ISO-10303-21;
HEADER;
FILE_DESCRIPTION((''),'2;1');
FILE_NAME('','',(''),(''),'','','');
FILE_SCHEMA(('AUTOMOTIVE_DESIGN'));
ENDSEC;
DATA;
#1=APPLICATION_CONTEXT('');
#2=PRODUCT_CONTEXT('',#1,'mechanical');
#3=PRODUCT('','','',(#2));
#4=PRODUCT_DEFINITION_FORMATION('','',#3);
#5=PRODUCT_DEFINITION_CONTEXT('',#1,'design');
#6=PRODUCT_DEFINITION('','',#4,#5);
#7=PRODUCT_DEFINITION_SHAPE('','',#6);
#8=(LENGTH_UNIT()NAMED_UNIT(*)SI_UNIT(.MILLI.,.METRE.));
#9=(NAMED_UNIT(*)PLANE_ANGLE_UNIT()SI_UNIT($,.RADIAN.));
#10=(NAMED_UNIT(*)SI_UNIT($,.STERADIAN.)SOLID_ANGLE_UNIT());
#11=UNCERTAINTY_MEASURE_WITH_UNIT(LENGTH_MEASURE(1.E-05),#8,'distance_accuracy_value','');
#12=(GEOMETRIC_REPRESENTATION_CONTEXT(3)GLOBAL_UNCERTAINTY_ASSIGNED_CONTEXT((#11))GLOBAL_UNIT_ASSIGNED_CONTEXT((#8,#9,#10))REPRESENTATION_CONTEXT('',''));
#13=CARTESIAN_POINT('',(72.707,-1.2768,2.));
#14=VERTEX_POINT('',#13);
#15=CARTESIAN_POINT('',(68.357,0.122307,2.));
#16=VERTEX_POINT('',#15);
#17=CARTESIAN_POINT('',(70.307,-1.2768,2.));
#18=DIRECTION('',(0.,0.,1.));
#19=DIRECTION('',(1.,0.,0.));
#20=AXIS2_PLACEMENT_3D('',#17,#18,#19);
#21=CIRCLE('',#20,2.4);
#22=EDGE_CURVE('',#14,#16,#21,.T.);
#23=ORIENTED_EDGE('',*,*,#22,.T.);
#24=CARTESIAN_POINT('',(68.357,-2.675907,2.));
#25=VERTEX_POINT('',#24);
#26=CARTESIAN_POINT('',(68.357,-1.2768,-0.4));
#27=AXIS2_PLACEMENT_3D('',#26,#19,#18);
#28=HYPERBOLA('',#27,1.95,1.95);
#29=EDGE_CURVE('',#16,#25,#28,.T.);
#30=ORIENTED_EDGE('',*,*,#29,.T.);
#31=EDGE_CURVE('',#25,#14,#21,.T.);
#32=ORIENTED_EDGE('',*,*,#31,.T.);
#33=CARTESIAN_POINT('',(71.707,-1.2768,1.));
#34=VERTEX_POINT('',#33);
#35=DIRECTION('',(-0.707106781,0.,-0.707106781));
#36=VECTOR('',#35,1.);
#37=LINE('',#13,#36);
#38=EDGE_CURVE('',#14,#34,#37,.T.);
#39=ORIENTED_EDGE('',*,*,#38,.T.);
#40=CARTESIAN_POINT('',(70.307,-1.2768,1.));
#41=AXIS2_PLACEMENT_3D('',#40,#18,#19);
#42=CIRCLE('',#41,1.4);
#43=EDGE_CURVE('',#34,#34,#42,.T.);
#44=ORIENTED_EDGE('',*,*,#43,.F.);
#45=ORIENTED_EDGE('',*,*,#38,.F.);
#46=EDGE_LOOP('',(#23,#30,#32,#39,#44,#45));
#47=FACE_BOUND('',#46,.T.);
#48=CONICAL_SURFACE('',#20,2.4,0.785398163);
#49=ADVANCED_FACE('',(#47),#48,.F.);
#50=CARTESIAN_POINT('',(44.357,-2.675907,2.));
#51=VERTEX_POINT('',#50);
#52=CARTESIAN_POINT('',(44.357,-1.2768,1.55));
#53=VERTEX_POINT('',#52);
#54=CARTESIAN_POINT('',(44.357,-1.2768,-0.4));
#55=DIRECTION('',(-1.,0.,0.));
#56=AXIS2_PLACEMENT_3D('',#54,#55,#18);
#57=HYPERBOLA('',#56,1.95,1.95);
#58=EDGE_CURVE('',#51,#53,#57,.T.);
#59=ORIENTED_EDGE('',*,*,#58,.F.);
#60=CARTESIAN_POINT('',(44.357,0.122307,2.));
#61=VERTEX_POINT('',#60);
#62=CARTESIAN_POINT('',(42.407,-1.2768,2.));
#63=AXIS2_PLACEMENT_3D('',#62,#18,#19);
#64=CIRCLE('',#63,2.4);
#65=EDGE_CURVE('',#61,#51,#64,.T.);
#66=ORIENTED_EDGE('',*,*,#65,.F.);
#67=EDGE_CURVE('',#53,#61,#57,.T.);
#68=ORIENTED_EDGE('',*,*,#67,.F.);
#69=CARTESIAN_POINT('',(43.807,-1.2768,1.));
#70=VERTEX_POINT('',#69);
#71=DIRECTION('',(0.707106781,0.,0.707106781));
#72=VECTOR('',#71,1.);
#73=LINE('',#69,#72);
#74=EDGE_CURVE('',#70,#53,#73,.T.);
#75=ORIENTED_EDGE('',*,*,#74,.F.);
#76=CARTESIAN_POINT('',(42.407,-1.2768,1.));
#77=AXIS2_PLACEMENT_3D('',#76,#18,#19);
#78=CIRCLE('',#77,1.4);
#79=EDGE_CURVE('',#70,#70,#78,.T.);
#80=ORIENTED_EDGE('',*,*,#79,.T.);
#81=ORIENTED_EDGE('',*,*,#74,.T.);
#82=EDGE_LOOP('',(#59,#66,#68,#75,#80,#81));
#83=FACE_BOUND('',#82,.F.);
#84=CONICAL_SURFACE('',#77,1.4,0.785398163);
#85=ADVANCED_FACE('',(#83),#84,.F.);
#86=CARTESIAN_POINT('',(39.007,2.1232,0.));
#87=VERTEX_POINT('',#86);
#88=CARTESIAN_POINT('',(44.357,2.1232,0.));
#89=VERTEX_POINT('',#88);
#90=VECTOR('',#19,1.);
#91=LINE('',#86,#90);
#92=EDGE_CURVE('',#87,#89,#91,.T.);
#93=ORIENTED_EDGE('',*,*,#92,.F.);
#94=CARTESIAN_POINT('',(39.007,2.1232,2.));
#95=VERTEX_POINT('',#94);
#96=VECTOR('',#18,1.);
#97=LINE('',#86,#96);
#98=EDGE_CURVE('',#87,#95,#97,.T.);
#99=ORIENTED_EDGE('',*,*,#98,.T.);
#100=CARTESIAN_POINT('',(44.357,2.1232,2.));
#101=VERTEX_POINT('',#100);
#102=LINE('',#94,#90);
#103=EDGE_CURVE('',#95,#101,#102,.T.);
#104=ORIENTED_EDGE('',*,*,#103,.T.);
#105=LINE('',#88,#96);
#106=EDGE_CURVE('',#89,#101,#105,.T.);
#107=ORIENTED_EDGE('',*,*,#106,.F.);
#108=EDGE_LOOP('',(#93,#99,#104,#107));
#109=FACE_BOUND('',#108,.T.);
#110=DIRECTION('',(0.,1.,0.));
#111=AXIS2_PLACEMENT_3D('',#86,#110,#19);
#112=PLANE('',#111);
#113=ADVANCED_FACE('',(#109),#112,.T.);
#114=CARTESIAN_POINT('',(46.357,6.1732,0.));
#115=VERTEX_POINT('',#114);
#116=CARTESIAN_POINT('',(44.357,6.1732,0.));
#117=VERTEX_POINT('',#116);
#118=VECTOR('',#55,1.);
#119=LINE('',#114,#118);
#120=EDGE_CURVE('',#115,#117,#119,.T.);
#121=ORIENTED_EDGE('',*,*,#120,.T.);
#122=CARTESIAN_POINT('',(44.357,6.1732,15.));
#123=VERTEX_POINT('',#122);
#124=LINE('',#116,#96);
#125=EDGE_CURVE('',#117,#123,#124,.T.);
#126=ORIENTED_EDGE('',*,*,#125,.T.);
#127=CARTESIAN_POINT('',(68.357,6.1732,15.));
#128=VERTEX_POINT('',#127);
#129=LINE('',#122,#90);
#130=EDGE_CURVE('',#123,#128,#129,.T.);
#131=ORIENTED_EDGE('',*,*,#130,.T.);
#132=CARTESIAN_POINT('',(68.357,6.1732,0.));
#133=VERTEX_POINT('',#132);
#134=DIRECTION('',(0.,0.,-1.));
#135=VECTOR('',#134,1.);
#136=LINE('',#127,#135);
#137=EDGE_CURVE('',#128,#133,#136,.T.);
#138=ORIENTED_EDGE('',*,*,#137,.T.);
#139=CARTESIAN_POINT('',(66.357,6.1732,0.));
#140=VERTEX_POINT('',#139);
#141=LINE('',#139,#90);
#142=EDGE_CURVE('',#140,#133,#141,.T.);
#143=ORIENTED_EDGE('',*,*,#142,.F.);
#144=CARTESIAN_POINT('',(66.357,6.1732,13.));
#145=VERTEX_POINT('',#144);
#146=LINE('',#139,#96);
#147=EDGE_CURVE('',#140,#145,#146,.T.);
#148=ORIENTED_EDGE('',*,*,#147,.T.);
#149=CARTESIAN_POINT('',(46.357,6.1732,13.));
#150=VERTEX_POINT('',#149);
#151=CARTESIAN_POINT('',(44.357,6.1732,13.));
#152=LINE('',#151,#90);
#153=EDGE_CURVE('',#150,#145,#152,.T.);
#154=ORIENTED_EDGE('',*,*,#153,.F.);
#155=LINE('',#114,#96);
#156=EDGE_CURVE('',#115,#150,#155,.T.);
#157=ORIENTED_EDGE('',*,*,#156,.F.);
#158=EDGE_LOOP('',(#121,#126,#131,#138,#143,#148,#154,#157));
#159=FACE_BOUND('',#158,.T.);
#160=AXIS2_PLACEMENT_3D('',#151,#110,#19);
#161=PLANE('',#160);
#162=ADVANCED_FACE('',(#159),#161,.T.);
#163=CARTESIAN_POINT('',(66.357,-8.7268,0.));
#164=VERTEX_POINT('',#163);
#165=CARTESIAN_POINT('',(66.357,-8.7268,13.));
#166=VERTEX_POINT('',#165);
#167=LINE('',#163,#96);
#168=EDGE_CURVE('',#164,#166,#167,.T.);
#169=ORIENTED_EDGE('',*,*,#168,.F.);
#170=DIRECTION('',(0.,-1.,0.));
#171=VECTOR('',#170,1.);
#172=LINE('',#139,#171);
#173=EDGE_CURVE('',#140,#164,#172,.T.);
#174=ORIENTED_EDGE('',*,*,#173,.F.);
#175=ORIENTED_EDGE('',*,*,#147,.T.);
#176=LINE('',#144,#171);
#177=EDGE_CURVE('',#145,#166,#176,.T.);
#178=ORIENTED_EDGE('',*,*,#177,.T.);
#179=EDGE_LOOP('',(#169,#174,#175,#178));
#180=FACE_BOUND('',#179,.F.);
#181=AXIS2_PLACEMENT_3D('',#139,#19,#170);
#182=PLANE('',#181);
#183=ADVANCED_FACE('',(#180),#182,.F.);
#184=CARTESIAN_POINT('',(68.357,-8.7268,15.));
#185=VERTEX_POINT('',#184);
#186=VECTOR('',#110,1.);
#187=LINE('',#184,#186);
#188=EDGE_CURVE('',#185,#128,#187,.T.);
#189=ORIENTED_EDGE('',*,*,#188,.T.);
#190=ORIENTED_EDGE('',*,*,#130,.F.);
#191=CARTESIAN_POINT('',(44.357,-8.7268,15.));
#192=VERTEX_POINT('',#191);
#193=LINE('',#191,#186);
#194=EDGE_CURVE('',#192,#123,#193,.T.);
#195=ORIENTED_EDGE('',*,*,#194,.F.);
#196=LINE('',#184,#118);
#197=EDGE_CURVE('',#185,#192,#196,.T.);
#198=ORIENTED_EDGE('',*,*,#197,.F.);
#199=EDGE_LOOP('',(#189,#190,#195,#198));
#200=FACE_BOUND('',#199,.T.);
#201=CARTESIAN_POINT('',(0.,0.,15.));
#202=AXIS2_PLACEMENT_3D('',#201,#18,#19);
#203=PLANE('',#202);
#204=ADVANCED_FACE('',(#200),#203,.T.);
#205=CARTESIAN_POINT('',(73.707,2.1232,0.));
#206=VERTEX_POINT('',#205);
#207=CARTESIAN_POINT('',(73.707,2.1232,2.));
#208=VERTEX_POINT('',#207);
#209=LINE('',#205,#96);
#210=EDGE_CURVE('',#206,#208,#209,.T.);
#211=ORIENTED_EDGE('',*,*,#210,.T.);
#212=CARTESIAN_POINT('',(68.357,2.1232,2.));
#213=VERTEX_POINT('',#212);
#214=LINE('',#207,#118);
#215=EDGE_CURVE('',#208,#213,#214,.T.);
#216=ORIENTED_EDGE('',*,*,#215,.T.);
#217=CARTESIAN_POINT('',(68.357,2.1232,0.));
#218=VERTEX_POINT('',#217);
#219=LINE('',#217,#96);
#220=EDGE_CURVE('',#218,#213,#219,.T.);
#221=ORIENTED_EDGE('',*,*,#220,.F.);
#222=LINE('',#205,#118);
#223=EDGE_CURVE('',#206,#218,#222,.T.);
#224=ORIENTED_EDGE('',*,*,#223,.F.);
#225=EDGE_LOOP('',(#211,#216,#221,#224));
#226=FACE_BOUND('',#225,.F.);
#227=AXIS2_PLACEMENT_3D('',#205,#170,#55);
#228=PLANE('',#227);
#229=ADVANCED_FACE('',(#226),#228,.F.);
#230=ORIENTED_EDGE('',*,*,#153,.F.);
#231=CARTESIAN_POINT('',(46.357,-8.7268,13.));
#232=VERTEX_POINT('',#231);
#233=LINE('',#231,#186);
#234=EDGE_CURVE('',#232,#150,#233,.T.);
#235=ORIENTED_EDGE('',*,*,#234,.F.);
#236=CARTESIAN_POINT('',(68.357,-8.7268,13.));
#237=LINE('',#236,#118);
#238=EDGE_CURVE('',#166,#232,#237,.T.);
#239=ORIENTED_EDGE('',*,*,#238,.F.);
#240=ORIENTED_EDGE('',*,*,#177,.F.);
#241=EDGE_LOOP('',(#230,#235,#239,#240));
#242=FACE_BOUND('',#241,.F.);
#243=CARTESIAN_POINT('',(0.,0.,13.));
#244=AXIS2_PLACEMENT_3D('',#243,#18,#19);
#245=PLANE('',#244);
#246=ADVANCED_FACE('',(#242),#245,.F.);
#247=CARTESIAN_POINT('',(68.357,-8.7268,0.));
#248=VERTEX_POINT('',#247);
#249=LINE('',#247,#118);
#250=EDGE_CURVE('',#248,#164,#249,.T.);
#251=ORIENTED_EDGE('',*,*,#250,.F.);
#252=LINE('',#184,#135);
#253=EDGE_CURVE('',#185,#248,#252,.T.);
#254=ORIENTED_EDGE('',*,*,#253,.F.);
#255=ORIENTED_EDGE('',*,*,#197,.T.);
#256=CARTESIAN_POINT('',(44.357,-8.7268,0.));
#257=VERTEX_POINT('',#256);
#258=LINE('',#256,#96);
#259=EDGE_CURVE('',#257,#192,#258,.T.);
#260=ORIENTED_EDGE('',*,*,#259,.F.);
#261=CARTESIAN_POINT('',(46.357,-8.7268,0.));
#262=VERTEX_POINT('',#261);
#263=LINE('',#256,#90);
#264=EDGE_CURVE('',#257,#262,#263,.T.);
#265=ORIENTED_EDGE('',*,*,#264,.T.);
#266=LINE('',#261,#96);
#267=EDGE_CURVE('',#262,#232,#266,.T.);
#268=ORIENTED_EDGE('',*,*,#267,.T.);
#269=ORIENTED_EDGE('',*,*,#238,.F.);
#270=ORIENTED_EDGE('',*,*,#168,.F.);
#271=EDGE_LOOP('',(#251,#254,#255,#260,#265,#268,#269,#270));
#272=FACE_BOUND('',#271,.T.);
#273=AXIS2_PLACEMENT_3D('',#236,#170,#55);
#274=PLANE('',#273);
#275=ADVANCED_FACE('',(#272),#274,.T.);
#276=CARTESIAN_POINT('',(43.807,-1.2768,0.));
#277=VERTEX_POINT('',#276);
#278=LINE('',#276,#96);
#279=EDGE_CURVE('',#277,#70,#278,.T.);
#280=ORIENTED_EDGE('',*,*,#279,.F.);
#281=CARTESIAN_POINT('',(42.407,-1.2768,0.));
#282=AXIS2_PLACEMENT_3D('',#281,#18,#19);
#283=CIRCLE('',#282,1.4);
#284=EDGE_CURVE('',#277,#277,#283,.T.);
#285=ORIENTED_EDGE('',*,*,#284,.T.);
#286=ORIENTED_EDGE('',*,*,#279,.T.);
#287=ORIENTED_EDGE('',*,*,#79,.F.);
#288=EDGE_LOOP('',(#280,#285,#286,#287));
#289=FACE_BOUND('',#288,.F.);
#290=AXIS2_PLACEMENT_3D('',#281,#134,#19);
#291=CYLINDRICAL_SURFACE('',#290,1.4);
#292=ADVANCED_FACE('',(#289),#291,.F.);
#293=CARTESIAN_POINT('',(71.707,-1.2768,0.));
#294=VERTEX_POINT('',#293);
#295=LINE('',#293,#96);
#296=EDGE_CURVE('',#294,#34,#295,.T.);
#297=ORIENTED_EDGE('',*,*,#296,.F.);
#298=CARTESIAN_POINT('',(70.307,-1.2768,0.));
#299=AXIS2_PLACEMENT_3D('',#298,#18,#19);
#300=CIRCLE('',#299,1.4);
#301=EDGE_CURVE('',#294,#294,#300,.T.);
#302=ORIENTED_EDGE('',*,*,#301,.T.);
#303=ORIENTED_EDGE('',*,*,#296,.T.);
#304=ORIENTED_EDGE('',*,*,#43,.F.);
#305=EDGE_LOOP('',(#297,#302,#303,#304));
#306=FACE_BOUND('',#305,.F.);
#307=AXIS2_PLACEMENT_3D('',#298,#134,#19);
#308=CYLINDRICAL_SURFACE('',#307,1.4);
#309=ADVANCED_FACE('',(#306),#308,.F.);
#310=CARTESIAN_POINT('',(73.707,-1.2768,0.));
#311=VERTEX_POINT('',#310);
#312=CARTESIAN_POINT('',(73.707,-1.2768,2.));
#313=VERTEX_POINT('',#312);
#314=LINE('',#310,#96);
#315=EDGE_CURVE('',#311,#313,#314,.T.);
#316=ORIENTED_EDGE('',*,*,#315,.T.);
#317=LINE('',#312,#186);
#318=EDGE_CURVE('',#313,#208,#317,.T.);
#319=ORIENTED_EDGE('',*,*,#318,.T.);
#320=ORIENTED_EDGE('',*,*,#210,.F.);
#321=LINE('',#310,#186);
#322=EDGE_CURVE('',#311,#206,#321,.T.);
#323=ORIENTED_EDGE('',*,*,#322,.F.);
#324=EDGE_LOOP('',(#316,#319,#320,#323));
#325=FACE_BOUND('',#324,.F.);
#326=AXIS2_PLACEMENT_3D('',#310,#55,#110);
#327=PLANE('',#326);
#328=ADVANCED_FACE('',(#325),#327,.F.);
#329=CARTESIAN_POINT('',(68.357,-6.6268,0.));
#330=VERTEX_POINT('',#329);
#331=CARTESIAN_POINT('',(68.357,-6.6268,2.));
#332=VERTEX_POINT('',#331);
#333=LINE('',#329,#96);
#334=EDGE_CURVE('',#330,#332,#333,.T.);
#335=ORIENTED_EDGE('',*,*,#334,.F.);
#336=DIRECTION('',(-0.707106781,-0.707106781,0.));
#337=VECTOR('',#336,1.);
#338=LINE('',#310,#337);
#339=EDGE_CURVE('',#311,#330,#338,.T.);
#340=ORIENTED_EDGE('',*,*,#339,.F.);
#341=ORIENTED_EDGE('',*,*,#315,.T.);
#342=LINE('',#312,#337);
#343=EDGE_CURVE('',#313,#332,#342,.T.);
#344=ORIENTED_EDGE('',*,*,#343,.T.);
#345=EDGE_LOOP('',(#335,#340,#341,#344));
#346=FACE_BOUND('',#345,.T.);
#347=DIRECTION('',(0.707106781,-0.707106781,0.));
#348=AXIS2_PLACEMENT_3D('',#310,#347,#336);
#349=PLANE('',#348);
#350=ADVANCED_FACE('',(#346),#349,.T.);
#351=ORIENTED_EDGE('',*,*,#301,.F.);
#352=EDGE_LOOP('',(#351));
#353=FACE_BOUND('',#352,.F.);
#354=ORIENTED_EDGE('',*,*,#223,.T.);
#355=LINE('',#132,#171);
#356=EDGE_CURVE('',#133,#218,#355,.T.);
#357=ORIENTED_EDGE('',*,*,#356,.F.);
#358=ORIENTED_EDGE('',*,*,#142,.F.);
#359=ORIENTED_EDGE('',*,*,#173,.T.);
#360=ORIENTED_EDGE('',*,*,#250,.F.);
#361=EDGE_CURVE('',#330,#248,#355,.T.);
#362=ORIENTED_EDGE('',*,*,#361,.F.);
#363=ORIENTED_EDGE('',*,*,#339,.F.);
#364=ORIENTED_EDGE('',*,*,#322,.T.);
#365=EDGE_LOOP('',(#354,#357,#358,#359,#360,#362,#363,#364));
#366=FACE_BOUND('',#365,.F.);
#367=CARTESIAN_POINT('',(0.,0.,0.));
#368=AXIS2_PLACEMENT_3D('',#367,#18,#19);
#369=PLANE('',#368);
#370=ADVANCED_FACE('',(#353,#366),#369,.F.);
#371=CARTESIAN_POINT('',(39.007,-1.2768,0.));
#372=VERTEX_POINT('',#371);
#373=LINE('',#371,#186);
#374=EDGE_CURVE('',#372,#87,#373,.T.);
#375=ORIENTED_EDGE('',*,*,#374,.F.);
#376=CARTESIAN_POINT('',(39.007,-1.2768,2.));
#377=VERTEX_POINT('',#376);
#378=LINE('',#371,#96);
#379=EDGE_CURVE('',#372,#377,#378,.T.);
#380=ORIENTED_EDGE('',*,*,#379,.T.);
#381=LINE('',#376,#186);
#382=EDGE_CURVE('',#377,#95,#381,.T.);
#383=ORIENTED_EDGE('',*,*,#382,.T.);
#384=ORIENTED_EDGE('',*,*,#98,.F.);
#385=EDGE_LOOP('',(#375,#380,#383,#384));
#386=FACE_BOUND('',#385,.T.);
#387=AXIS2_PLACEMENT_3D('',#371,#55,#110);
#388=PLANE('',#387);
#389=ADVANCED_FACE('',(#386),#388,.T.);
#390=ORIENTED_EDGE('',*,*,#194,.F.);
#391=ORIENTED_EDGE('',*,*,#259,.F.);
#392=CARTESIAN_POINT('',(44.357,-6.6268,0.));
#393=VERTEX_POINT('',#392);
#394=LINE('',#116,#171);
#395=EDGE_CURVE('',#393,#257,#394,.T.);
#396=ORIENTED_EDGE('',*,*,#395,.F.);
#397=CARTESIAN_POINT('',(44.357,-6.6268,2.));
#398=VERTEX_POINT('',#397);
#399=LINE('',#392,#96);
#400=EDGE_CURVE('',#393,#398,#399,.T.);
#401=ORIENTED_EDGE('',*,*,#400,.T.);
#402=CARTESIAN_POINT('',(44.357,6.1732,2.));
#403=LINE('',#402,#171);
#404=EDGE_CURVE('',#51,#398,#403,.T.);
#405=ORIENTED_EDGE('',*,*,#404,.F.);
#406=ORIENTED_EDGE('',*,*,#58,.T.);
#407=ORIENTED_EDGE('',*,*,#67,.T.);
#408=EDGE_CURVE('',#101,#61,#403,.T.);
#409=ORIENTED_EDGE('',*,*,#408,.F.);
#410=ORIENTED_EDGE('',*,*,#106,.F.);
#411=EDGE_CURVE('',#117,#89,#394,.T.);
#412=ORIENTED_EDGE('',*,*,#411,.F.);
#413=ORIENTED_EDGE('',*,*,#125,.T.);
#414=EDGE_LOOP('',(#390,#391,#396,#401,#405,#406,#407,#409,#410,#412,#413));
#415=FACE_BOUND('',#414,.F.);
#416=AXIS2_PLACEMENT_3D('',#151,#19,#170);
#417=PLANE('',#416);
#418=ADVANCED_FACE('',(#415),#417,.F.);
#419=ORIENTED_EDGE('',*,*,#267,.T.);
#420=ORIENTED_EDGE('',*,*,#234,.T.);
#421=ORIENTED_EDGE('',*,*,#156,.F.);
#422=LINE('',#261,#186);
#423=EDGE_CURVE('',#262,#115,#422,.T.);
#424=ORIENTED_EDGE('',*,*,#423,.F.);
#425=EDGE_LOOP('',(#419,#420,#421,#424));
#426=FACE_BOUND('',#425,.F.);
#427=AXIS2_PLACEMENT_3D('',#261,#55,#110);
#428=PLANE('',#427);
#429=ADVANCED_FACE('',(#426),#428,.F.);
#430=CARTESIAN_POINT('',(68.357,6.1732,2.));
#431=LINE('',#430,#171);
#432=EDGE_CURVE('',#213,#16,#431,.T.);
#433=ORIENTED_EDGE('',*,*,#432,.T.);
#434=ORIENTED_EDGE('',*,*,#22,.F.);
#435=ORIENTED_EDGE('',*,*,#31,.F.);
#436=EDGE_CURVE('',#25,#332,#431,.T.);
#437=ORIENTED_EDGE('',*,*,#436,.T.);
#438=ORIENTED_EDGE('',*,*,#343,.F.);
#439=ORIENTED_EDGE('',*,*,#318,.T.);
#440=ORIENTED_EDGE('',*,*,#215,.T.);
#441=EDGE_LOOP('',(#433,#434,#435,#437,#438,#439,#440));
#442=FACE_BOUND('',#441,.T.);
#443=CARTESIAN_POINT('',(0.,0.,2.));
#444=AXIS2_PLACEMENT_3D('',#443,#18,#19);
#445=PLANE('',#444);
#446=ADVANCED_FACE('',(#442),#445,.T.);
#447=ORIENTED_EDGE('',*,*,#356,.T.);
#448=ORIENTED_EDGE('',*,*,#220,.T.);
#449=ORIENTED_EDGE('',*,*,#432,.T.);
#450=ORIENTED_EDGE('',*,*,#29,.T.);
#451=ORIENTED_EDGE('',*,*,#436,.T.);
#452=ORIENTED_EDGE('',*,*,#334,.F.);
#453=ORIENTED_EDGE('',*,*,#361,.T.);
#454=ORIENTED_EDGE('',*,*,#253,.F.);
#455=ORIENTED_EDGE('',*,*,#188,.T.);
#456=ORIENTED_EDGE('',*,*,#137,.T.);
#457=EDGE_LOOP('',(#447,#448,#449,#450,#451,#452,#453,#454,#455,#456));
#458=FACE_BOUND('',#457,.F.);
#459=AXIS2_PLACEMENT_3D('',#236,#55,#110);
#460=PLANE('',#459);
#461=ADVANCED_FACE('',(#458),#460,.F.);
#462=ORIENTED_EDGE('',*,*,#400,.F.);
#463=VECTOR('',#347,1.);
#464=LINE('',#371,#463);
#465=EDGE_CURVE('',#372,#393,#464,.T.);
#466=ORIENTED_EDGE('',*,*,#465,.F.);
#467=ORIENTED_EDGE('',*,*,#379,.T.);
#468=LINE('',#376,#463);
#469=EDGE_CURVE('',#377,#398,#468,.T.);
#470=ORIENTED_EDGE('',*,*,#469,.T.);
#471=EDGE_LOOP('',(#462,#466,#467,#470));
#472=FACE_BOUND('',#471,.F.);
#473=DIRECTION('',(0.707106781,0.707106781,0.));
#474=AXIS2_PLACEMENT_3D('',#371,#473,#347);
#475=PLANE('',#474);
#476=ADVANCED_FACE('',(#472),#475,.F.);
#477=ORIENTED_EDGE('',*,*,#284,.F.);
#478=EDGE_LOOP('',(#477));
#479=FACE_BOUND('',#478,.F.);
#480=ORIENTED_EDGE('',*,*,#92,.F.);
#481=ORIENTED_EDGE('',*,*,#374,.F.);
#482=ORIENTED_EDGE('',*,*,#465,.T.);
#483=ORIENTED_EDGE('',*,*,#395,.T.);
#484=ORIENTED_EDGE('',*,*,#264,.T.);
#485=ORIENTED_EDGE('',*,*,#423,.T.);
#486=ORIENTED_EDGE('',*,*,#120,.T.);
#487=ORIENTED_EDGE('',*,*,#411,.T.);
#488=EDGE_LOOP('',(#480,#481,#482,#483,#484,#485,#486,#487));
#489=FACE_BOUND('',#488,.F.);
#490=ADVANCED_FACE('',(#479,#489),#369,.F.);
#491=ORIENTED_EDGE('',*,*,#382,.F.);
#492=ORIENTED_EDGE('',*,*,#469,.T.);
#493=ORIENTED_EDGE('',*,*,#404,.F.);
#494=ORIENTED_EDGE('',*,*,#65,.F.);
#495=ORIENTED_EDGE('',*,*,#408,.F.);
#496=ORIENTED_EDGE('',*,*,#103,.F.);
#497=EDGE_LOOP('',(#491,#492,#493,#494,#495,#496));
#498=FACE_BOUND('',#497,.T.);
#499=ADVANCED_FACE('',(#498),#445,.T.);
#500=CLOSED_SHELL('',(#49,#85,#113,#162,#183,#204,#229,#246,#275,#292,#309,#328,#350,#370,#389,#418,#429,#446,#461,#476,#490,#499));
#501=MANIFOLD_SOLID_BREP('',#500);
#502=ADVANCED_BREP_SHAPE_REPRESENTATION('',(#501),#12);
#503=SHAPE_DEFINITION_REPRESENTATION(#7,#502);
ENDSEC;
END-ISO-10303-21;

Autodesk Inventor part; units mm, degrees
ref_plane "YZ Plane" through (0, 0, 0) normal (1, 0, 0) x (0, 1, 0)
ref_plane "XZ Plane" through (0, 0, 0) normal (0, 1, 0) x (-1, 0, 0)
ref_plane "XY Plane" through (0, 0, 0) normal (0, 0, 1) x (1, 0, 0)
sketch "Esboço4" plane through (0, 0, 0) normal (0, 0, 1) x (1, 0, 0)
  point P0 (0, 0)
  point P1 (43.221, 21.8373)
  point P2 (101.0161, 22.7479)
  point P3 (77.0161, 22.7479)
sketch "Esboço5" plane through (0, 0, 0) normal (0, 0, 1) x (1, 0, 0)
  line L0 (46.357, -8.7268) -> (46.357, 6.1732)
  line L1 (66.357, 6.1732) -> (66.357, -8.7268)
  line L2 (46.357, 6.1732) -> (44.357, 6.1732)
  line L3 (44.357, 6.1732) -> (44.357, -8.7268)
  line L4 (44.357, -8.7268) -> (46.357, -8.7268)
  line L5 (56.357, 6.1732) -> (56.357, -8.7268)
  circle A0 centre (42.407, -1.2768) radius 1.4
  line L6 (39.007, -1.2768) -> (44.357, -6.6268)
  line L7 (39.007, -1.2768) -> (46.573, -1.2768) construction
  line L8 (39.007, -1.2768) -> (39.007, 2.1232)
  line L9 (39.007, 2.1232) -> (44.357, 2.1232)
  line L10 (66.357, -8.7268) -> (66.357, 6.1732)
  line L11 (66.357, 6.1732) -> (68.357, 6.1732)
  line L12 (68.357, 6.1732) -> (68.357, -8.7268)
  line L13 (68.357, -8.7268) -> (66.357, -8.7268)
  circle A1 centre (70.307, -1.2768) radius 1.4
  line L14 (73.707, -1.2768) -> (68.357, -6.6268)
  line L15 (73.707, -1.2768) -> (66.1409, -1.2768) construction
  line L16 (73.707, -1.2768) -> (73.707, 2.1232)
  line L17 (73.707, 2.1232) -> (68.357, 2.1232)
  point P0 (0, 0)
  dimension "d23" = 20
  dimension "d29" = 2
  dimension "d35" = 45
extrude "Extrusão4" add sketch "Esboço5" along normal blind 2
sketch "Esboço6" plane through (0, 0, 2) normal (0, 0, 1) x (1, 0, 0)
  line L0 (46.357, 6.1732) -> (44.357, 6.1732) projected
  line L1 (46.357, 6.1732) -> (44.357, 6.1732)
  line L2 (44.357, -8.7268) -> (46.357, -8.7268) projected
  line L3 (46.357, -8.7268) -> (46.357, 6.1732)
  line L4 (44.357, 6.1732) -> (44.357, -8.7268)
  line L5 (46.357, -8.7268) -> (44.357, -8.7268)
  line L6 (66.357, 6.1732) -> (66.357, -8.7268) projected
  line L7 (68.357, 6.1732) -> (66.357, 6.1732) projected
  line L8 (66.357, 6.1732) -> (68.357, 6.1732)
  line L9 (68.357, 6.1732) -> (68.357, -8.7268)
  line L10 (68.357, -8.7268) -> (66.357, -8.7268)
  line L11 (66.357, -8.7268) -> (66.357, 6.1732)
  point P0 (0, 0)
extrude "Extrusão5" add sketch "Esboço6" along normal blind 11
sketch "Esboço7" plane through (0, 0, 13) normal (0, 0, 1) x (1, 0, 0)
  line L0 (44.357, 6.1732) -> (44.357, 2.1232) projected
  line L1 (68.357, -8.7268) -> (68.357, 6.1732) projected
  line L2 (44.357, 6.1732) -> (68.357, 6.1732)
  line L3 (68.357, 6.1732) -> (68.357, -8.7268)
  line L4 (68.357, -8.7268) -> (44.357, -8.7268)
  line L5 (44.357, -8.7268) -> (44.357, 6.1732)
  point P0 (0, 0)
extrude "Extrusão6" add sketch "Esboço7" along normal blind 2
chamfer "Chanfro1" distance 1 angle 45 1 edges at (68.907, -1.2768, 2)
chamfer "Chanfro2" distance 1 angle 45 1 edges at (41.007, -1.2768, 2)
properties part number "protetor_luz"
